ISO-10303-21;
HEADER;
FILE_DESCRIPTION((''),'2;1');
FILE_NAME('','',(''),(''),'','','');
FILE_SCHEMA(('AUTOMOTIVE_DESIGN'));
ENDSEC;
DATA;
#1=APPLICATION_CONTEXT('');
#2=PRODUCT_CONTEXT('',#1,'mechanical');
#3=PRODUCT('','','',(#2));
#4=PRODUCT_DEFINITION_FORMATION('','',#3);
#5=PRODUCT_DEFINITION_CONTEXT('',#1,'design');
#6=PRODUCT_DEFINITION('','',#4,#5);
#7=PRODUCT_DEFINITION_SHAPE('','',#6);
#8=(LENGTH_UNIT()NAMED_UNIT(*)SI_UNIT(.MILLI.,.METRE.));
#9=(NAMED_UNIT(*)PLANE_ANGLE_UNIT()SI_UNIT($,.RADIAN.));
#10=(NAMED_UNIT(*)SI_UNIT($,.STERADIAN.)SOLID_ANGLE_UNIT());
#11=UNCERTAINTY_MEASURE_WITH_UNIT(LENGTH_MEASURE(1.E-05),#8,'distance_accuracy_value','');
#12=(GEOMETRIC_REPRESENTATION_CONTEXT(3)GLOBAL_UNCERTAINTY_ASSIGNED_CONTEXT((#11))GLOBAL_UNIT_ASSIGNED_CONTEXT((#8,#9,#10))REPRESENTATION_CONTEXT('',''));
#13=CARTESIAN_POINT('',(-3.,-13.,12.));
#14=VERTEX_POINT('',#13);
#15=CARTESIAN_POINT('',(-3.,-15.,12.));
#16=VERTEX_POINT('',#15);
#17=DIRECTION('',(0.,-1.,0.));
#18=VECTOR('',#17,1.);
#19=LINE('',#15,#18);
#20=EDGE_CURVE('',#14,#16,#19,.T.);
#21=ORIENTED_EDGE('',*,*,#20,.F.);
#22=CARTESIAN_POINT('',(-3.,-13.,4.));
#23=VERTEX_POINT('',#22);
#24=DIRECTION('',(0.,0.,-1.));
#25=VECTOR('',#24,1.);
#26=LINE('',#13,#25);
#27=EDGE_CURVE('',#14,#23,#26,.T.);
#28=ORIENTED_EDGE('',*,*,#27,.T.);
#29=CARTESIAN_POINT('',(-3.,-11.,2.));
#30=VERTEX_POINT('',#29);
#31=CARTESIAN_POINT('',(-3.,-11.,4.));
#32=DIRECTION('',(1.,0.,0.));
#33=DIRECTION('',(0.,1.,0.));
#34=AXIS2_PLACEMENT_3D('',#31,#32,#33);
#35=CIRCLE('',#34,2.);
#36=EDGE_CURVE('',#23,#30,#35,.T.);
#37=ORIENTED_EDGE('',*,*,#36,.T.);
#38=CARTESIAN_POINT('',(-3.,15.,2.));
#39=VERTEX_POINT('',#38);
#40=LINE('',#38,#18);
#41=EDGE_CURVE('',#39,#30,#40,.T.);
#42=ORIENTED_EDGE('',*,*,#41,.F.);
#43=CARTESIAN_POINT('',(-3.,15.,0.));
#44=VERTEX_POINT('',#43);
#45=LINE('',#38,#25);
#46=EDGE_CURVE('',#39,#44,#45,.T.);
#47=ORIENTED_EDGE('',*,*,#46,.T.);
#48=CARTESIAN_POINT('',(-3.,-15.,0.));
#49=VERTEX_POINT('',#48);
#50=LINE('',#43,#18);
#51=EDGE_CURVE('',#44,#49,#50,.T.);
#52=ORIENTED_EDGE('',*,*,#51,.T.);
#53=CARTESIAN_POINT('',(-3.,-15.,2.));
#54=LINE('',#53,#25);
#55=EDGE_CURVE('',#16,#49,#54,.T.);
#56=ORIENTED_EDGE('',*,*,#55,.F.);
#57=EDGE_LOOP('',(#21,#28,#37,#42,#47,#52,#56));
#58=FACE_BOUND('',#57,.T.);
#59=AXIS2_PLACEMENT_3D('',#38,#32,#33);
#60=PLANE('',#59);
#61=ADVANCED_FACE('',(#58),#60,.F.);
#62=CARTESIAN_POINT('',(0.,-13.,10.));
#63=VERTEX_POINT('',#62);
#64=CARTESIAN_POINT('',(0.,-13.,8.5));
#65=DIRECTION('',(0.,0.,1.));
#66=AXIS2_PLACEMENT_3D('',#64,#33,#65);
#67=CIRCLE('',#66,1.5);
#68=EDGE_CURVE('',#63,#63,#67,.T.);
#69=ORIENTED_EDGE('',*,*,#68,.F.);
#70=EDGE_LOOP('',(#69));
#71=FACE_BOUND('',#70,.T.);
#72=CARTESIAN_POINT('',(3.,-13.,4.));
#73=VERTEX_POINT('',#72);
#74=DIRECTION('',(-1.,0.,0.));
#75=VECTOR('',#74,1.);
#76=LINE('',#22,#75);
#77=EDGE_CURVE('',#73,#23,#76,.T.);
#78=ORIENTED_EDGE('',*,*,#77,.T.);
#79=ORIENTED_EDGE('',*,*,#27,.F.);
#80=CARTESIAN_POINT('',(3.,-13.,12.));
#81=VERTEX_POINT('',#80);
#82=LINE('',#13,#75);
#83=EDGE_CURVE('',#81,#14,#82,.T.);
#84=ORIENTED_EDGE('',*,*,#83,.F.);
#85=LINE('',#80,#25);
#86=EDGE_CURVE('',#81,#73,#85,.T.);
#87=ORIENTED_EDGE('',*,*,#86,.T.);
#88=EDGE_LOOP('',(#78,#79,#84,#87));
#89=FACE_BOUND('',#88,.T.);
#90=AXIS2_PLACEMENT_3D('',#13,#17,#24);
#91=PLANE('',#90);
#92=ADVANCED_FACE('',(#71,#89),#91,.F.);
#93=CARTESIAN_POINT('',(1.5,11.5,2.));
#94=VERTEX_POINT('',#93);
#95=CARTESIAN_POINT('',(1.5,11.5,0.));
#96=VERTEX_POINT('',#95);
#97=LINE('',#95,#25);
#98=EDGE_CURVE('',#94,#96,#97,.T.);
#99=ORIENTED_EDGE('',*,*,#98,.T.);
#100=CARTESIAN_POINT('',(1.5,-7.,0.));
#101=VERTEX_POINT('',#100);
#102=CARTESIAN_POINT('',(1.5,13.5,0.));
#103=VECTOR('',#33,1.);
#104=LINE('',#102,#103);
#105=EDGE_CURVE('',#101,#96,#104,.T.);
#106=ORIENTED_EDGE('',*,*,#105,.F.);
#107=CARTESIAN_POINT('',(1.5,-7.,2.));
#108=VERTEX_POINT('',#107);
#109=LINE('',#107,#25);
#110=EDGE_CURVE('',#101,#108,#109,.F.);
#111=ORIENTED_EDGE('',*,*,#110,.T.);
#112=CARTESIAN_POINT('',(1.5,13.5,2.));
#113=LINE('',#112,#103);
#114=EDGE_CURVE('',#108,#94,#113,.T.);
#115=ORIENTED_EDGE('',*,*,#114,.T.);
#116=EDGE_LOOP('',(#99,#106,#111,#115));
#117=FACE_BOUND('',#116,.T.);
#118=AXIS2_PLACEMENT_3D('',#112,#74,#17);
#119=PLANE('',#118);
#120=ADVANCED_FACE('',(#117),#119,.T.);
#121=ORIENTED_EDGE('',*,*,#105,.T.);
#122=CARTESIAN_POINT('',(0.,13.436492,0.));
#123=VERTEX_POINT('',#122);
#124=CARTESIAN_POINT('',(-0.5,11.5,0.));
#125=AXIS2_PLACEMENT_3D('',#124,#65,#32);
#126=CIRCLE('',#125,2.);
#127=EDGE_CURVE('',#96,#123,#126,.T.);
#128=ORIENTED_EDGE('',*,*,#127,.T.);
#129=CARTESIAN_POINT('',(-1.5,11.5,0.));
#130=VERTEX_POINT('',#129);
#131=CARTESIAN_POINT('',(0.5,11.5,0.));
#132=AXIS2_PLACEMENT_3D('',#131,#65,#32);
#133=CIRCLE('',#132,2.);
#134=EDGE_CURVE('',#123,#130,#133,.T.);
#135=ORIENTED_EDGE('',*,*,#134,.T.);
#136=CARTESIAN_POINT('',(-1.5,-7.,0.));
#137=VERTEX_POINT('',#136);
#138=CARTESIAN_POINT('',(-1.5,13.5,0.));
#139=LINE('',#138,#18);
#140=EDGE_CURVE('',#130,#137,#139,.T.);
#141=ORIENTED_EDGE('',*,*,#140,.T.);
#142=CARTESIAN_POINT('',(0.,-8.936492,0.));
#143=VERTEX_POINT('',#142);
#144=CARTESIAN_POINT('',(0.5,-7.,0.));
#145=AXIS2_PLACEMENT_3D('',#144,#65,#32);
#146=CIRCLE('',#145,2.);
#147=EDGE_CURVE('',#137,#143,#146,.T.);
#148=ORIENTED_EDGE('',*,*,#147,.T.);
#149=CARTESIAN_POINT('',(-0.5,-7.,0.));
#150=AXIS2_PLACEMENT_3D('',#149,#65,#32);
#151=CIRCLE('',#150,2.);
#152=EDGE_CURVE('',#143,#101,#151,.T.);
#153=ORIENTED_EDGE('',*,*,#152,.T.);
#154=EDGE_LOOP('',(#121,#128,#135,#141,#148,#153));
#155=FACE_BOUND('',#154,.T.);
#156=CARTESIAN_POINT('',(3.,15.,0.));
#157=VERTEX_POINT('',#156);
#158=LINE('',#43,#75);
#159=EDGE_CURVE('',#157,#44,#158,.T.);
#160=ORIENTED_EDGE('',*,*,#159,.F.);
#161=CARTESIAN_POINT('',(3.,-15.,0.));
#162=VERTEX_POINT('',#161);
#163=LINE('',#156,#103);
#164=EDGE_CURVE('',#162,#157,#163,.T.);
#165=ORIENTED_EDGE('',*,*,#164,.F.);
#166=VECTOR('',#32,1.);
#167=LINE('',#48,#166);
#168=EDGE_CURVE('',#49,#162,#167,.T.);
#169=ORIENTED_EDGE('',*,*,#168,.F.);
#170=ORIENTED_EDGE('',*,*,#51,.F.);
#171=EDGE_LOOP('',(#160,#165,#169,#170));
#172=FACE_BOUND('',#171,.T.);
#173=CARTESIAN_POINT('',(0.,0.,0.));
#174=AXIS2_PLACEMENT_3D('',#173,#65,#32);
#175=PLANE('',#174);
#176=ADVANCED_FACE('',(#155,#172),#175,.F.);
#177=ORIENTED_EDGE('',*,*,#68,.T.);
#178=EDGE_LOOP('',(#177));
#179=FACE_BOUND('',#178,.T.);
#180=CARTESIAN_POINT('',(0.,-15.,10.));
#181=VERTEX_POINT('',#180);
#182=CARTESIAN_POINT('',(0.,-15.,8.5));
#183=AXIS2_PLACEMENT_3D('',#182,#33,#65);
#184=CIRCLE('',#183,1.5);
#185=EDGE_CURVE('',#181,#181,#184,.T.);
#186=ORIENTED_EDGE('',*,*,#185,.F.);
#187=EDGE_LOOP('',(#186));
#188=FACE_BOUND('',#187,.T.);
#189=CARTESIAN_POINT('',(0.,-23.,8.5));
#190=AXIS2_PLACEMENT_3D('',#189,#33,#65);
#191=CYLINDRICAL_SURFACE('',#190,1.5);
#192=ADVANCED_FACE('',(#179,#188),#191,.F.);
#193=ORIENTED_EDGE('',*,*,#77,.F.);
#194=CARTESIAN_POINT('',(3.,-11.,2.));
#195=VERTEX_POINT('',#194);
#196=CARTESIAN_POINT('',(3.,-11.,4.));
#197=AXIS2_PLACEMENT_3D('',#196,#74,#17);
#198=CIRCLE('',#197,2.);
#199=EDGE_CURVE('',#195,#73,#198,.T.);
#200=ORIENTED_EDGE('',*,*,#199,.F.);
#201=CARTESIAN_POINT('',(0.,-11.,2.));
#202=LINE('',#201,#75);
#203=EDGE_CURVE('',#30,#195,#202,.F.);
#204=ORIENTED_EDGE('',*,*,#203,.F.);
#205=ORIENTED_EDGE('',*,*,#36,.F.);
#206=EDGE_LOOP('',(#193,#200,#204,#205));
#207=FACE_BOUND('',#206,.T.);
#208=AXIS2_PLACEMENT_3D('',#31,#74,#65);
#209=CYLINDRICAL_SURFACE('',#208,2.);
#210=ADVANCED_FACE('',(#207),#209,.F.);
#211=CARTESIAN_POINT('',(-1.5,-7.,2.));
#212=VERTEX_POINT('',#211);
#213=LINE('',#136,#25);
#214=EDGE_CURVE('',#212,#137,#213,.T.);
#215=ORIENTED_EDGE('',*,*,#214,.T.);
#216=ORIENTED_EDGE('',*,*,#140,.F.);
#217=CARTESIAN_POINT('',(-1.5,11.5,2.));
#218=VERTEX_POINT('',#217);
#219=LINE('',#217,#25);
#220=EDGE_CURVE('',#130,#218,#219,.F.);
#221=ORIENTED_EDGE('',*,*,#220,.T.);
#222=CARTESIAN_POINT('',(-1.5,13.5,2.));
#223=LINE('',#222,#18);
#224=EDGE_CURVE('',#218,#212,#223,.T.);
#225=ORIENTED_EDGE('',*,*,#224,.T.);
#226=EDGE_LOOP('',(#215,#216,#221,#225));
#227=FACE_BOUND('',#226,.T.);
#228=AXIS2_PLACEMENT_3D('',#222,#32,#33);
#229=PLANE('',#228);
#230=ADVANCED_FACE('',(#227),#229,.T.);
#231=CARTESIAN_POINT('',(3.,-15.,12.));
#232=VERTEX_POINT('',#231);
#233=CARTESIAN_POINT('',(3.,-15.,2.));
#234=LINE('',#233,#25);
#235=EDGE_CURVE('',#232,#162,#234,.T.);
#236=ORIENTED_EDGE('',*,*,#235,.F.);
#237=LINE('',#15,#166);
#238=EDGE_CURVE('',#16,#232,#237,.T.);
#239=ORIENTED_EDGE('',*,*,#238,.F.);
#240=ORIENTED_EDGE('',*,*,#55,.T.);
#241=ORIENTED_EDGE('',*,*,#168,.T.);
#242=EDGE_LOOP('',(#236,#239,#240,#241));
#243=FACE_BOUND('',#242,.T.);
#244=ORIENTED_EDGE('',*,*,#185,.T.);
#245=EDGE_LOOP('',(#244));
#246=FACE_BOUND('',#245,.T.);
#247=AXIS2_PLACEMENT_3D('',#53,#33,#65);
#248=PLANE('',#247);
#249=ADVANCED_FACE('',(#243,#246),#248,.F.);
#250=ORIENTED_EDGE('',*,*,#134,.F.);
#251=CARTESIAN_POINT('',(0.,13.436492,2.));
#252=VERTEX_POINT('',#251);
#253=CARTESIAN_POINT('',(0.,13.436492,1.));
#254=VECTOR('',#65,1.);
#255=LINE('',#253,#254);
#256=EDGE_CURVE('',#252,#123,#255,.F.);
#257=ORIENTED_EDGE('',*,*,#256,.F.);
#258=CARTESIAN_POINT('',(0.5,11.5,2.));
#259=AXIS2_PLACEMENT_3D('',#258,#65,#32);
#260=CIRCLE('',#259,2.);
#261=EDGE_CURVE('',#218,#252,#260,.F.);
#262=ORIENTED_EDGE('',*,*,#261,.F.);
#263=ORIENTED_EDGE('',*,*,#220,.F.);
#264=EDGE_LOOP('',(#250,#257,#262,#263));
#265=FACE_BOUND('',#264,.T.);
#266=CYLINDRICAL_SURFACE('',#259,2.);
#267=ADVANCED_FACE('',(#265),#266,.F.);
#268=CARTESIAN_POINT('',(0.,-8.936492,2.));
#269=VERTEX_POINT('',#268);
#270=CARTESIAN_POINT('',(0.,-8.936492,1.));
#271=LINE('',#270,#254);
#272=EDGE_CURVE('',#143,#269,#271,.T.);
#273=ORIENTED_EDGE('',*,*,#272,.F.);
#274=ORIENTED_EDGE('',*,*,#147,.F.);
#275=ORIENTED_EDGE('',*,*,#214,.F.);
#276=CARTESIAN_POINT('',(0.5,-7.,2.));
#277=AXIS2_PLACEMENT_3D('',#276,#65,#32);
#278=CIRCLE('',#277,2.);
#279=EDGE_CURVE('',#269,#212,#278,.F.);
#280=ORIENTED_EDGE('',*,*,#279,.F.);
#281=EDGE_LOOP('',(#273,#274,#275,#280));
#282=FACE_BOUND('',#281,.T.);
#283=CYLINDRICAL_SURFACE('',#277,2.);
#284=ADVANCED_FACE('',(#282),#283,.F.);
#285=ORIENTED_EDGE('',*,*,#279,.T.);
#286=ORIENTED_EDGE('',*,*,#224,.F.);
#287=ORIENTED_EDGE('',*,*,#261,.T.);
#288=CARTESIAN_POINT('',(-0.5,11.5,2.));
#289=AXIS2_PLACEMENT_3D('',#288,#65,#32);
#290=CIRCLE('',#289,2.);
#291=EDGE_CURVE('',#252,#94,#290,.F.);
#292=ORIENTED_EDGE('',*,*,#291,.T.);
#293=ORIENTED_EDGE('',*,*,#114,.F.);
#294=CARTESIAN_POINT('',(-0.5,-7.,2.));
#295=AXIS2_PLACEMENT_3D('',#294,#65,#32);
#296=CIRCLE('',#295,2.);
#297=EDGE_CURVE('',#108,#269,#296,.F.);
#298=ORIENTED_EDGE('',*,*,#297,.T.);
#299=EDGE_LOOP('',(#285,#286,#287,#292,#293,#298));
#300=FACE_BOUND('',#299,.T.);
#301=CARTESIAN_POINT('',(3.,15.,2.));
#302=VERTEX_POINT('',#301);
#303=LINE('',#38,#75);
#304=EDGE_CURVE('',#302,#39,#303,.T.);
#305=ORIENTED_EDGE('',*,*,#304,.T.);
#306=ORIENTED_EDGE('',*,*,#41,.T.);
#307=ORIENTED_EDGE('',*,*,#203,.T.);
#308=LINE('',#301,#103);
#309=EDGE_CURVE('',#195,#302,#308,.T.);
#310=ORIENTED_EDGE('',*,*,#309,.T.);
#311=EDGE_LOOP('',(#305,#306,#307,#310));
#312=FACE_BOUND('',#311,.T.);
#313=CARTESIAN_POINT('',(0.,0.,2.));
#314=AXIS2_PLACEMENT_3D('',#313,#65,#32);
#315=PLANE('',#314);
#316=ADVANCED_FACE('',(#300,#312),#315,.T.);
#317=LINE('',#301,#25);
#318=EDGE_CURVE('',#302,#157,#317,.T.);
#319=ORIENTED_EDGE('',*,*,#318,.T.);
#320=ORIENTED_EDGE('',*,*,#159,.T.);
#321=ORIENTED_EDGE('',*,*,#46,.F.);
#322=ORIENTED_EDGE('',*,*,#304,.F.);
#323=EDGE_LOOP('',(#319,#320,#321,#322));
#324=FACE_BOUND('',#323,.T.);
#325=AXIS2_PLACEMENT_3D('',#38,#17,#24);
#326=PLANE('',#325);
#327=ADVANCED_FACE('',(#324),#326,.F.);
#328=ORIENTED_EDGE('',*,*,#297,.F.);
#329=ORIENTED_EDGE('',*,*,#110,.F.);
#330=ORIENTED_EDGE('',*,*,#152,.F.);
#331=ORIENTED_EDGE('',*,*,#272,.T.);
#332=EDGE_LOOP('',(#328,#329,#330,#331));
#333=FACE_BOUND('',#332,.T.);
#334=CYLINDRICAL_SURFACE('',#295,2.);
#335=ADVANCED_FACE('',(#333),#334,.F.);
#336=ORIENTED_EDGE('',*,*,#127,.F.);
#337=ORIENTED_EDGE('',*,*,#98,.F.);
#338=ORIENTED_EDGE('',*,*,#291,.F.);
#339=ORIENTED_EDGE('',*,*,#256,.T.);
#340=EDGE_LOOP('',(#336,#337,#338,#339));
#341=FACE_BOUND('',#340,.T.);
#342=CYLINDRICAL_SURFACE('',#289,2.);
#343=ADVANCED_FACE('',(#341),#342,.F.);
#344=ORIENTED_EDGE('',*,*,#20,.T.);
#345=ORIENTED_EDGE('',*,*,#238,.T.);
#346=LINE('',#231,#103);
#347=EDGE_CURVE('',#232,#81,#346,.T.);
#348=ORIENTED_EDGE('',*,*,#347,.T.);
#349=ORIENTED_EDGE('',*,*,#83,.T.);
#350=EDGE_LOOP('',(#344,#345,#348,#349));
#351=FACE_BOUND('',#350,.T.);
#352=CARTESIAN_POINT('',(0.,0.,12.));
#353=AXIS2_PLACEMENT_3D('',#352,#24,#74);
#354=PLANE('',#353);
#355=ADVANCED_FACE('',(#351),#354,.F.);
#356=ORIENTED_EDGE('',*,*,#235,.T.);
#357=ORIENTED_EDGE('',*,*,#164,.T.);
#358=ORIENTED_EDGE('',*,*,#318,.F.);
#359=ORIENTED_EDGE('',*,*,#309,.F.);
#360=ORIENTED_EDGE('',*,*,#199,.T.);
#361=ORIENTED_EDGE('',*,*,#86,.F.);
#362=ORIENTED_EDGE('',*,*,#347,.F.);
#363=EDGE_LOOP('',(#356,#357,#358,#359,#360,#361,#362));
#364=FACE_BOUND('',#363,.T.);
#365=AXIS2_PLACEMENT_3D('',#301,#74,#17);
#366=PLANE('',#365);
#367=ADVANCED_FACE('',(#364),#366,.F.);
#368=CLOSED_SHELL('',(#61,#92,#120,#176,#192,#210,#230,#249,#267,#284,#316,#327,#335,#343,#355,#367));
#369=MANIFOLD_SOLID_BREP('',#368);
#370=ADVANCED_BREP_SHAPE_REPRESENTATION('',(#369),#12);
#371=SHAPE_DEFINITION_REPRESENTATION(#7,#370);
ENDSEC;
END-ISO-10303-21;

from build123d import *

# Parameters (mm, degrees)
SKETCH1_W           = 6
SKETCH1_H           = 30
SKETCH1_W_2         = 3
SKETCH1_H_2         = 22.5
BOSS_EXTRUDE1_DEPTH = 2
FILLET1_R           = 2
SKETCH2_W           = 6
SKETCH2_H           = 2
BOSS_EXTRUDE2_DEPTH = 10
FILLET2_R           = 2
SKETCH3_R           = 1.5
CUT_EXTRUDE1_DEPTH  = 10


with BuildPart() as part:
    # Sketch1 → Boss-Extrude1 (new body)
    with BuildSketch(Plane.XY):
        Rectangle(SKETCH1_W, SKETCH1_H)
        with Locations((0, 2.25)):
            Rectangle(SKETCH1_W_2, SKETCH1_H_2, mode=Mode.SUBTRACT)
    extrude(amount=BOSS_EXTRUDE1_DEPTH)

    # Fillet1
    # the kernel refuses this fillet: 2 mm, written as the material it adds along each edge
    with BuildSketch(Plane(origin=(1.5, 13.5, 0), x_dir=(0, -1, 0), z_dir=(0, 0, 1)), Plane(origin=(1.5, -9, 0), x_dir=(-1, 0, 0), z_dir=(0, 0, 1)), Plane(origin=(-1.5, -9, 0), x_dir=(0, 1, 0), z_dir=(0, 0, 1))) as fillet1_piece_1:
        with BuildLine():
            CenterArc((FILLET1_R, -FILLET1_R), FILLET1_R, 90, 90)
            Line((0, -FILLET1_R), (0, 0))
            Line((0, 0), (FILLET1_R, 0))
        make_face()
    extrude(amount=2)
    with BuildSketch(Plane(origin=(-1.5, 13.5, 0), x_dir=(0, -1, 0), z_dir=(0, 0, 1))) as fillet1_piece_2:
        with BuildLine():
            CenterArc((FILLET1_R, FILLET1_R), FILLET1_R, 180, 90)
            Line((0, FILLET1_R), (0, 0))
            Line((0, 0), (FILLET1_R, 0))
        make_face()
    extrude(amount=2)

    # Sketch2 → Boss-Extrude2 (add)
    with BuildSketch(Plane.XY.offset(2)):
        with Locations((0, -14)):
            Rectangle(SKETCH2_W, SKETCH2_H)
    extrude(amount=BOSS_EXTRUDE2_DEPTH)

    # Fillet2
    fillet2_edges = [part.edges().sort_by_distance(p)[0] for p in [
        (0, -13, 2),
    ]]
    fillet(fillet2_edges, radius=FILLET2_R)

    # Sketch3 → Cut-Extrude1 (cut)
    with BuildSketch(Plane(origin=(0, -13, 0), x_dir=(1, 0, 0), z_dir=(0, 1, 0))):
        with Locations(Location((0, -8.5, 0), (0, 0, 270))):
            Circle(SKETCH3_R)
    extrude(amount=-CUT_EXTRUDE1_DEPTH, mode=Mode.SUBTRACT)


solid = part.part
